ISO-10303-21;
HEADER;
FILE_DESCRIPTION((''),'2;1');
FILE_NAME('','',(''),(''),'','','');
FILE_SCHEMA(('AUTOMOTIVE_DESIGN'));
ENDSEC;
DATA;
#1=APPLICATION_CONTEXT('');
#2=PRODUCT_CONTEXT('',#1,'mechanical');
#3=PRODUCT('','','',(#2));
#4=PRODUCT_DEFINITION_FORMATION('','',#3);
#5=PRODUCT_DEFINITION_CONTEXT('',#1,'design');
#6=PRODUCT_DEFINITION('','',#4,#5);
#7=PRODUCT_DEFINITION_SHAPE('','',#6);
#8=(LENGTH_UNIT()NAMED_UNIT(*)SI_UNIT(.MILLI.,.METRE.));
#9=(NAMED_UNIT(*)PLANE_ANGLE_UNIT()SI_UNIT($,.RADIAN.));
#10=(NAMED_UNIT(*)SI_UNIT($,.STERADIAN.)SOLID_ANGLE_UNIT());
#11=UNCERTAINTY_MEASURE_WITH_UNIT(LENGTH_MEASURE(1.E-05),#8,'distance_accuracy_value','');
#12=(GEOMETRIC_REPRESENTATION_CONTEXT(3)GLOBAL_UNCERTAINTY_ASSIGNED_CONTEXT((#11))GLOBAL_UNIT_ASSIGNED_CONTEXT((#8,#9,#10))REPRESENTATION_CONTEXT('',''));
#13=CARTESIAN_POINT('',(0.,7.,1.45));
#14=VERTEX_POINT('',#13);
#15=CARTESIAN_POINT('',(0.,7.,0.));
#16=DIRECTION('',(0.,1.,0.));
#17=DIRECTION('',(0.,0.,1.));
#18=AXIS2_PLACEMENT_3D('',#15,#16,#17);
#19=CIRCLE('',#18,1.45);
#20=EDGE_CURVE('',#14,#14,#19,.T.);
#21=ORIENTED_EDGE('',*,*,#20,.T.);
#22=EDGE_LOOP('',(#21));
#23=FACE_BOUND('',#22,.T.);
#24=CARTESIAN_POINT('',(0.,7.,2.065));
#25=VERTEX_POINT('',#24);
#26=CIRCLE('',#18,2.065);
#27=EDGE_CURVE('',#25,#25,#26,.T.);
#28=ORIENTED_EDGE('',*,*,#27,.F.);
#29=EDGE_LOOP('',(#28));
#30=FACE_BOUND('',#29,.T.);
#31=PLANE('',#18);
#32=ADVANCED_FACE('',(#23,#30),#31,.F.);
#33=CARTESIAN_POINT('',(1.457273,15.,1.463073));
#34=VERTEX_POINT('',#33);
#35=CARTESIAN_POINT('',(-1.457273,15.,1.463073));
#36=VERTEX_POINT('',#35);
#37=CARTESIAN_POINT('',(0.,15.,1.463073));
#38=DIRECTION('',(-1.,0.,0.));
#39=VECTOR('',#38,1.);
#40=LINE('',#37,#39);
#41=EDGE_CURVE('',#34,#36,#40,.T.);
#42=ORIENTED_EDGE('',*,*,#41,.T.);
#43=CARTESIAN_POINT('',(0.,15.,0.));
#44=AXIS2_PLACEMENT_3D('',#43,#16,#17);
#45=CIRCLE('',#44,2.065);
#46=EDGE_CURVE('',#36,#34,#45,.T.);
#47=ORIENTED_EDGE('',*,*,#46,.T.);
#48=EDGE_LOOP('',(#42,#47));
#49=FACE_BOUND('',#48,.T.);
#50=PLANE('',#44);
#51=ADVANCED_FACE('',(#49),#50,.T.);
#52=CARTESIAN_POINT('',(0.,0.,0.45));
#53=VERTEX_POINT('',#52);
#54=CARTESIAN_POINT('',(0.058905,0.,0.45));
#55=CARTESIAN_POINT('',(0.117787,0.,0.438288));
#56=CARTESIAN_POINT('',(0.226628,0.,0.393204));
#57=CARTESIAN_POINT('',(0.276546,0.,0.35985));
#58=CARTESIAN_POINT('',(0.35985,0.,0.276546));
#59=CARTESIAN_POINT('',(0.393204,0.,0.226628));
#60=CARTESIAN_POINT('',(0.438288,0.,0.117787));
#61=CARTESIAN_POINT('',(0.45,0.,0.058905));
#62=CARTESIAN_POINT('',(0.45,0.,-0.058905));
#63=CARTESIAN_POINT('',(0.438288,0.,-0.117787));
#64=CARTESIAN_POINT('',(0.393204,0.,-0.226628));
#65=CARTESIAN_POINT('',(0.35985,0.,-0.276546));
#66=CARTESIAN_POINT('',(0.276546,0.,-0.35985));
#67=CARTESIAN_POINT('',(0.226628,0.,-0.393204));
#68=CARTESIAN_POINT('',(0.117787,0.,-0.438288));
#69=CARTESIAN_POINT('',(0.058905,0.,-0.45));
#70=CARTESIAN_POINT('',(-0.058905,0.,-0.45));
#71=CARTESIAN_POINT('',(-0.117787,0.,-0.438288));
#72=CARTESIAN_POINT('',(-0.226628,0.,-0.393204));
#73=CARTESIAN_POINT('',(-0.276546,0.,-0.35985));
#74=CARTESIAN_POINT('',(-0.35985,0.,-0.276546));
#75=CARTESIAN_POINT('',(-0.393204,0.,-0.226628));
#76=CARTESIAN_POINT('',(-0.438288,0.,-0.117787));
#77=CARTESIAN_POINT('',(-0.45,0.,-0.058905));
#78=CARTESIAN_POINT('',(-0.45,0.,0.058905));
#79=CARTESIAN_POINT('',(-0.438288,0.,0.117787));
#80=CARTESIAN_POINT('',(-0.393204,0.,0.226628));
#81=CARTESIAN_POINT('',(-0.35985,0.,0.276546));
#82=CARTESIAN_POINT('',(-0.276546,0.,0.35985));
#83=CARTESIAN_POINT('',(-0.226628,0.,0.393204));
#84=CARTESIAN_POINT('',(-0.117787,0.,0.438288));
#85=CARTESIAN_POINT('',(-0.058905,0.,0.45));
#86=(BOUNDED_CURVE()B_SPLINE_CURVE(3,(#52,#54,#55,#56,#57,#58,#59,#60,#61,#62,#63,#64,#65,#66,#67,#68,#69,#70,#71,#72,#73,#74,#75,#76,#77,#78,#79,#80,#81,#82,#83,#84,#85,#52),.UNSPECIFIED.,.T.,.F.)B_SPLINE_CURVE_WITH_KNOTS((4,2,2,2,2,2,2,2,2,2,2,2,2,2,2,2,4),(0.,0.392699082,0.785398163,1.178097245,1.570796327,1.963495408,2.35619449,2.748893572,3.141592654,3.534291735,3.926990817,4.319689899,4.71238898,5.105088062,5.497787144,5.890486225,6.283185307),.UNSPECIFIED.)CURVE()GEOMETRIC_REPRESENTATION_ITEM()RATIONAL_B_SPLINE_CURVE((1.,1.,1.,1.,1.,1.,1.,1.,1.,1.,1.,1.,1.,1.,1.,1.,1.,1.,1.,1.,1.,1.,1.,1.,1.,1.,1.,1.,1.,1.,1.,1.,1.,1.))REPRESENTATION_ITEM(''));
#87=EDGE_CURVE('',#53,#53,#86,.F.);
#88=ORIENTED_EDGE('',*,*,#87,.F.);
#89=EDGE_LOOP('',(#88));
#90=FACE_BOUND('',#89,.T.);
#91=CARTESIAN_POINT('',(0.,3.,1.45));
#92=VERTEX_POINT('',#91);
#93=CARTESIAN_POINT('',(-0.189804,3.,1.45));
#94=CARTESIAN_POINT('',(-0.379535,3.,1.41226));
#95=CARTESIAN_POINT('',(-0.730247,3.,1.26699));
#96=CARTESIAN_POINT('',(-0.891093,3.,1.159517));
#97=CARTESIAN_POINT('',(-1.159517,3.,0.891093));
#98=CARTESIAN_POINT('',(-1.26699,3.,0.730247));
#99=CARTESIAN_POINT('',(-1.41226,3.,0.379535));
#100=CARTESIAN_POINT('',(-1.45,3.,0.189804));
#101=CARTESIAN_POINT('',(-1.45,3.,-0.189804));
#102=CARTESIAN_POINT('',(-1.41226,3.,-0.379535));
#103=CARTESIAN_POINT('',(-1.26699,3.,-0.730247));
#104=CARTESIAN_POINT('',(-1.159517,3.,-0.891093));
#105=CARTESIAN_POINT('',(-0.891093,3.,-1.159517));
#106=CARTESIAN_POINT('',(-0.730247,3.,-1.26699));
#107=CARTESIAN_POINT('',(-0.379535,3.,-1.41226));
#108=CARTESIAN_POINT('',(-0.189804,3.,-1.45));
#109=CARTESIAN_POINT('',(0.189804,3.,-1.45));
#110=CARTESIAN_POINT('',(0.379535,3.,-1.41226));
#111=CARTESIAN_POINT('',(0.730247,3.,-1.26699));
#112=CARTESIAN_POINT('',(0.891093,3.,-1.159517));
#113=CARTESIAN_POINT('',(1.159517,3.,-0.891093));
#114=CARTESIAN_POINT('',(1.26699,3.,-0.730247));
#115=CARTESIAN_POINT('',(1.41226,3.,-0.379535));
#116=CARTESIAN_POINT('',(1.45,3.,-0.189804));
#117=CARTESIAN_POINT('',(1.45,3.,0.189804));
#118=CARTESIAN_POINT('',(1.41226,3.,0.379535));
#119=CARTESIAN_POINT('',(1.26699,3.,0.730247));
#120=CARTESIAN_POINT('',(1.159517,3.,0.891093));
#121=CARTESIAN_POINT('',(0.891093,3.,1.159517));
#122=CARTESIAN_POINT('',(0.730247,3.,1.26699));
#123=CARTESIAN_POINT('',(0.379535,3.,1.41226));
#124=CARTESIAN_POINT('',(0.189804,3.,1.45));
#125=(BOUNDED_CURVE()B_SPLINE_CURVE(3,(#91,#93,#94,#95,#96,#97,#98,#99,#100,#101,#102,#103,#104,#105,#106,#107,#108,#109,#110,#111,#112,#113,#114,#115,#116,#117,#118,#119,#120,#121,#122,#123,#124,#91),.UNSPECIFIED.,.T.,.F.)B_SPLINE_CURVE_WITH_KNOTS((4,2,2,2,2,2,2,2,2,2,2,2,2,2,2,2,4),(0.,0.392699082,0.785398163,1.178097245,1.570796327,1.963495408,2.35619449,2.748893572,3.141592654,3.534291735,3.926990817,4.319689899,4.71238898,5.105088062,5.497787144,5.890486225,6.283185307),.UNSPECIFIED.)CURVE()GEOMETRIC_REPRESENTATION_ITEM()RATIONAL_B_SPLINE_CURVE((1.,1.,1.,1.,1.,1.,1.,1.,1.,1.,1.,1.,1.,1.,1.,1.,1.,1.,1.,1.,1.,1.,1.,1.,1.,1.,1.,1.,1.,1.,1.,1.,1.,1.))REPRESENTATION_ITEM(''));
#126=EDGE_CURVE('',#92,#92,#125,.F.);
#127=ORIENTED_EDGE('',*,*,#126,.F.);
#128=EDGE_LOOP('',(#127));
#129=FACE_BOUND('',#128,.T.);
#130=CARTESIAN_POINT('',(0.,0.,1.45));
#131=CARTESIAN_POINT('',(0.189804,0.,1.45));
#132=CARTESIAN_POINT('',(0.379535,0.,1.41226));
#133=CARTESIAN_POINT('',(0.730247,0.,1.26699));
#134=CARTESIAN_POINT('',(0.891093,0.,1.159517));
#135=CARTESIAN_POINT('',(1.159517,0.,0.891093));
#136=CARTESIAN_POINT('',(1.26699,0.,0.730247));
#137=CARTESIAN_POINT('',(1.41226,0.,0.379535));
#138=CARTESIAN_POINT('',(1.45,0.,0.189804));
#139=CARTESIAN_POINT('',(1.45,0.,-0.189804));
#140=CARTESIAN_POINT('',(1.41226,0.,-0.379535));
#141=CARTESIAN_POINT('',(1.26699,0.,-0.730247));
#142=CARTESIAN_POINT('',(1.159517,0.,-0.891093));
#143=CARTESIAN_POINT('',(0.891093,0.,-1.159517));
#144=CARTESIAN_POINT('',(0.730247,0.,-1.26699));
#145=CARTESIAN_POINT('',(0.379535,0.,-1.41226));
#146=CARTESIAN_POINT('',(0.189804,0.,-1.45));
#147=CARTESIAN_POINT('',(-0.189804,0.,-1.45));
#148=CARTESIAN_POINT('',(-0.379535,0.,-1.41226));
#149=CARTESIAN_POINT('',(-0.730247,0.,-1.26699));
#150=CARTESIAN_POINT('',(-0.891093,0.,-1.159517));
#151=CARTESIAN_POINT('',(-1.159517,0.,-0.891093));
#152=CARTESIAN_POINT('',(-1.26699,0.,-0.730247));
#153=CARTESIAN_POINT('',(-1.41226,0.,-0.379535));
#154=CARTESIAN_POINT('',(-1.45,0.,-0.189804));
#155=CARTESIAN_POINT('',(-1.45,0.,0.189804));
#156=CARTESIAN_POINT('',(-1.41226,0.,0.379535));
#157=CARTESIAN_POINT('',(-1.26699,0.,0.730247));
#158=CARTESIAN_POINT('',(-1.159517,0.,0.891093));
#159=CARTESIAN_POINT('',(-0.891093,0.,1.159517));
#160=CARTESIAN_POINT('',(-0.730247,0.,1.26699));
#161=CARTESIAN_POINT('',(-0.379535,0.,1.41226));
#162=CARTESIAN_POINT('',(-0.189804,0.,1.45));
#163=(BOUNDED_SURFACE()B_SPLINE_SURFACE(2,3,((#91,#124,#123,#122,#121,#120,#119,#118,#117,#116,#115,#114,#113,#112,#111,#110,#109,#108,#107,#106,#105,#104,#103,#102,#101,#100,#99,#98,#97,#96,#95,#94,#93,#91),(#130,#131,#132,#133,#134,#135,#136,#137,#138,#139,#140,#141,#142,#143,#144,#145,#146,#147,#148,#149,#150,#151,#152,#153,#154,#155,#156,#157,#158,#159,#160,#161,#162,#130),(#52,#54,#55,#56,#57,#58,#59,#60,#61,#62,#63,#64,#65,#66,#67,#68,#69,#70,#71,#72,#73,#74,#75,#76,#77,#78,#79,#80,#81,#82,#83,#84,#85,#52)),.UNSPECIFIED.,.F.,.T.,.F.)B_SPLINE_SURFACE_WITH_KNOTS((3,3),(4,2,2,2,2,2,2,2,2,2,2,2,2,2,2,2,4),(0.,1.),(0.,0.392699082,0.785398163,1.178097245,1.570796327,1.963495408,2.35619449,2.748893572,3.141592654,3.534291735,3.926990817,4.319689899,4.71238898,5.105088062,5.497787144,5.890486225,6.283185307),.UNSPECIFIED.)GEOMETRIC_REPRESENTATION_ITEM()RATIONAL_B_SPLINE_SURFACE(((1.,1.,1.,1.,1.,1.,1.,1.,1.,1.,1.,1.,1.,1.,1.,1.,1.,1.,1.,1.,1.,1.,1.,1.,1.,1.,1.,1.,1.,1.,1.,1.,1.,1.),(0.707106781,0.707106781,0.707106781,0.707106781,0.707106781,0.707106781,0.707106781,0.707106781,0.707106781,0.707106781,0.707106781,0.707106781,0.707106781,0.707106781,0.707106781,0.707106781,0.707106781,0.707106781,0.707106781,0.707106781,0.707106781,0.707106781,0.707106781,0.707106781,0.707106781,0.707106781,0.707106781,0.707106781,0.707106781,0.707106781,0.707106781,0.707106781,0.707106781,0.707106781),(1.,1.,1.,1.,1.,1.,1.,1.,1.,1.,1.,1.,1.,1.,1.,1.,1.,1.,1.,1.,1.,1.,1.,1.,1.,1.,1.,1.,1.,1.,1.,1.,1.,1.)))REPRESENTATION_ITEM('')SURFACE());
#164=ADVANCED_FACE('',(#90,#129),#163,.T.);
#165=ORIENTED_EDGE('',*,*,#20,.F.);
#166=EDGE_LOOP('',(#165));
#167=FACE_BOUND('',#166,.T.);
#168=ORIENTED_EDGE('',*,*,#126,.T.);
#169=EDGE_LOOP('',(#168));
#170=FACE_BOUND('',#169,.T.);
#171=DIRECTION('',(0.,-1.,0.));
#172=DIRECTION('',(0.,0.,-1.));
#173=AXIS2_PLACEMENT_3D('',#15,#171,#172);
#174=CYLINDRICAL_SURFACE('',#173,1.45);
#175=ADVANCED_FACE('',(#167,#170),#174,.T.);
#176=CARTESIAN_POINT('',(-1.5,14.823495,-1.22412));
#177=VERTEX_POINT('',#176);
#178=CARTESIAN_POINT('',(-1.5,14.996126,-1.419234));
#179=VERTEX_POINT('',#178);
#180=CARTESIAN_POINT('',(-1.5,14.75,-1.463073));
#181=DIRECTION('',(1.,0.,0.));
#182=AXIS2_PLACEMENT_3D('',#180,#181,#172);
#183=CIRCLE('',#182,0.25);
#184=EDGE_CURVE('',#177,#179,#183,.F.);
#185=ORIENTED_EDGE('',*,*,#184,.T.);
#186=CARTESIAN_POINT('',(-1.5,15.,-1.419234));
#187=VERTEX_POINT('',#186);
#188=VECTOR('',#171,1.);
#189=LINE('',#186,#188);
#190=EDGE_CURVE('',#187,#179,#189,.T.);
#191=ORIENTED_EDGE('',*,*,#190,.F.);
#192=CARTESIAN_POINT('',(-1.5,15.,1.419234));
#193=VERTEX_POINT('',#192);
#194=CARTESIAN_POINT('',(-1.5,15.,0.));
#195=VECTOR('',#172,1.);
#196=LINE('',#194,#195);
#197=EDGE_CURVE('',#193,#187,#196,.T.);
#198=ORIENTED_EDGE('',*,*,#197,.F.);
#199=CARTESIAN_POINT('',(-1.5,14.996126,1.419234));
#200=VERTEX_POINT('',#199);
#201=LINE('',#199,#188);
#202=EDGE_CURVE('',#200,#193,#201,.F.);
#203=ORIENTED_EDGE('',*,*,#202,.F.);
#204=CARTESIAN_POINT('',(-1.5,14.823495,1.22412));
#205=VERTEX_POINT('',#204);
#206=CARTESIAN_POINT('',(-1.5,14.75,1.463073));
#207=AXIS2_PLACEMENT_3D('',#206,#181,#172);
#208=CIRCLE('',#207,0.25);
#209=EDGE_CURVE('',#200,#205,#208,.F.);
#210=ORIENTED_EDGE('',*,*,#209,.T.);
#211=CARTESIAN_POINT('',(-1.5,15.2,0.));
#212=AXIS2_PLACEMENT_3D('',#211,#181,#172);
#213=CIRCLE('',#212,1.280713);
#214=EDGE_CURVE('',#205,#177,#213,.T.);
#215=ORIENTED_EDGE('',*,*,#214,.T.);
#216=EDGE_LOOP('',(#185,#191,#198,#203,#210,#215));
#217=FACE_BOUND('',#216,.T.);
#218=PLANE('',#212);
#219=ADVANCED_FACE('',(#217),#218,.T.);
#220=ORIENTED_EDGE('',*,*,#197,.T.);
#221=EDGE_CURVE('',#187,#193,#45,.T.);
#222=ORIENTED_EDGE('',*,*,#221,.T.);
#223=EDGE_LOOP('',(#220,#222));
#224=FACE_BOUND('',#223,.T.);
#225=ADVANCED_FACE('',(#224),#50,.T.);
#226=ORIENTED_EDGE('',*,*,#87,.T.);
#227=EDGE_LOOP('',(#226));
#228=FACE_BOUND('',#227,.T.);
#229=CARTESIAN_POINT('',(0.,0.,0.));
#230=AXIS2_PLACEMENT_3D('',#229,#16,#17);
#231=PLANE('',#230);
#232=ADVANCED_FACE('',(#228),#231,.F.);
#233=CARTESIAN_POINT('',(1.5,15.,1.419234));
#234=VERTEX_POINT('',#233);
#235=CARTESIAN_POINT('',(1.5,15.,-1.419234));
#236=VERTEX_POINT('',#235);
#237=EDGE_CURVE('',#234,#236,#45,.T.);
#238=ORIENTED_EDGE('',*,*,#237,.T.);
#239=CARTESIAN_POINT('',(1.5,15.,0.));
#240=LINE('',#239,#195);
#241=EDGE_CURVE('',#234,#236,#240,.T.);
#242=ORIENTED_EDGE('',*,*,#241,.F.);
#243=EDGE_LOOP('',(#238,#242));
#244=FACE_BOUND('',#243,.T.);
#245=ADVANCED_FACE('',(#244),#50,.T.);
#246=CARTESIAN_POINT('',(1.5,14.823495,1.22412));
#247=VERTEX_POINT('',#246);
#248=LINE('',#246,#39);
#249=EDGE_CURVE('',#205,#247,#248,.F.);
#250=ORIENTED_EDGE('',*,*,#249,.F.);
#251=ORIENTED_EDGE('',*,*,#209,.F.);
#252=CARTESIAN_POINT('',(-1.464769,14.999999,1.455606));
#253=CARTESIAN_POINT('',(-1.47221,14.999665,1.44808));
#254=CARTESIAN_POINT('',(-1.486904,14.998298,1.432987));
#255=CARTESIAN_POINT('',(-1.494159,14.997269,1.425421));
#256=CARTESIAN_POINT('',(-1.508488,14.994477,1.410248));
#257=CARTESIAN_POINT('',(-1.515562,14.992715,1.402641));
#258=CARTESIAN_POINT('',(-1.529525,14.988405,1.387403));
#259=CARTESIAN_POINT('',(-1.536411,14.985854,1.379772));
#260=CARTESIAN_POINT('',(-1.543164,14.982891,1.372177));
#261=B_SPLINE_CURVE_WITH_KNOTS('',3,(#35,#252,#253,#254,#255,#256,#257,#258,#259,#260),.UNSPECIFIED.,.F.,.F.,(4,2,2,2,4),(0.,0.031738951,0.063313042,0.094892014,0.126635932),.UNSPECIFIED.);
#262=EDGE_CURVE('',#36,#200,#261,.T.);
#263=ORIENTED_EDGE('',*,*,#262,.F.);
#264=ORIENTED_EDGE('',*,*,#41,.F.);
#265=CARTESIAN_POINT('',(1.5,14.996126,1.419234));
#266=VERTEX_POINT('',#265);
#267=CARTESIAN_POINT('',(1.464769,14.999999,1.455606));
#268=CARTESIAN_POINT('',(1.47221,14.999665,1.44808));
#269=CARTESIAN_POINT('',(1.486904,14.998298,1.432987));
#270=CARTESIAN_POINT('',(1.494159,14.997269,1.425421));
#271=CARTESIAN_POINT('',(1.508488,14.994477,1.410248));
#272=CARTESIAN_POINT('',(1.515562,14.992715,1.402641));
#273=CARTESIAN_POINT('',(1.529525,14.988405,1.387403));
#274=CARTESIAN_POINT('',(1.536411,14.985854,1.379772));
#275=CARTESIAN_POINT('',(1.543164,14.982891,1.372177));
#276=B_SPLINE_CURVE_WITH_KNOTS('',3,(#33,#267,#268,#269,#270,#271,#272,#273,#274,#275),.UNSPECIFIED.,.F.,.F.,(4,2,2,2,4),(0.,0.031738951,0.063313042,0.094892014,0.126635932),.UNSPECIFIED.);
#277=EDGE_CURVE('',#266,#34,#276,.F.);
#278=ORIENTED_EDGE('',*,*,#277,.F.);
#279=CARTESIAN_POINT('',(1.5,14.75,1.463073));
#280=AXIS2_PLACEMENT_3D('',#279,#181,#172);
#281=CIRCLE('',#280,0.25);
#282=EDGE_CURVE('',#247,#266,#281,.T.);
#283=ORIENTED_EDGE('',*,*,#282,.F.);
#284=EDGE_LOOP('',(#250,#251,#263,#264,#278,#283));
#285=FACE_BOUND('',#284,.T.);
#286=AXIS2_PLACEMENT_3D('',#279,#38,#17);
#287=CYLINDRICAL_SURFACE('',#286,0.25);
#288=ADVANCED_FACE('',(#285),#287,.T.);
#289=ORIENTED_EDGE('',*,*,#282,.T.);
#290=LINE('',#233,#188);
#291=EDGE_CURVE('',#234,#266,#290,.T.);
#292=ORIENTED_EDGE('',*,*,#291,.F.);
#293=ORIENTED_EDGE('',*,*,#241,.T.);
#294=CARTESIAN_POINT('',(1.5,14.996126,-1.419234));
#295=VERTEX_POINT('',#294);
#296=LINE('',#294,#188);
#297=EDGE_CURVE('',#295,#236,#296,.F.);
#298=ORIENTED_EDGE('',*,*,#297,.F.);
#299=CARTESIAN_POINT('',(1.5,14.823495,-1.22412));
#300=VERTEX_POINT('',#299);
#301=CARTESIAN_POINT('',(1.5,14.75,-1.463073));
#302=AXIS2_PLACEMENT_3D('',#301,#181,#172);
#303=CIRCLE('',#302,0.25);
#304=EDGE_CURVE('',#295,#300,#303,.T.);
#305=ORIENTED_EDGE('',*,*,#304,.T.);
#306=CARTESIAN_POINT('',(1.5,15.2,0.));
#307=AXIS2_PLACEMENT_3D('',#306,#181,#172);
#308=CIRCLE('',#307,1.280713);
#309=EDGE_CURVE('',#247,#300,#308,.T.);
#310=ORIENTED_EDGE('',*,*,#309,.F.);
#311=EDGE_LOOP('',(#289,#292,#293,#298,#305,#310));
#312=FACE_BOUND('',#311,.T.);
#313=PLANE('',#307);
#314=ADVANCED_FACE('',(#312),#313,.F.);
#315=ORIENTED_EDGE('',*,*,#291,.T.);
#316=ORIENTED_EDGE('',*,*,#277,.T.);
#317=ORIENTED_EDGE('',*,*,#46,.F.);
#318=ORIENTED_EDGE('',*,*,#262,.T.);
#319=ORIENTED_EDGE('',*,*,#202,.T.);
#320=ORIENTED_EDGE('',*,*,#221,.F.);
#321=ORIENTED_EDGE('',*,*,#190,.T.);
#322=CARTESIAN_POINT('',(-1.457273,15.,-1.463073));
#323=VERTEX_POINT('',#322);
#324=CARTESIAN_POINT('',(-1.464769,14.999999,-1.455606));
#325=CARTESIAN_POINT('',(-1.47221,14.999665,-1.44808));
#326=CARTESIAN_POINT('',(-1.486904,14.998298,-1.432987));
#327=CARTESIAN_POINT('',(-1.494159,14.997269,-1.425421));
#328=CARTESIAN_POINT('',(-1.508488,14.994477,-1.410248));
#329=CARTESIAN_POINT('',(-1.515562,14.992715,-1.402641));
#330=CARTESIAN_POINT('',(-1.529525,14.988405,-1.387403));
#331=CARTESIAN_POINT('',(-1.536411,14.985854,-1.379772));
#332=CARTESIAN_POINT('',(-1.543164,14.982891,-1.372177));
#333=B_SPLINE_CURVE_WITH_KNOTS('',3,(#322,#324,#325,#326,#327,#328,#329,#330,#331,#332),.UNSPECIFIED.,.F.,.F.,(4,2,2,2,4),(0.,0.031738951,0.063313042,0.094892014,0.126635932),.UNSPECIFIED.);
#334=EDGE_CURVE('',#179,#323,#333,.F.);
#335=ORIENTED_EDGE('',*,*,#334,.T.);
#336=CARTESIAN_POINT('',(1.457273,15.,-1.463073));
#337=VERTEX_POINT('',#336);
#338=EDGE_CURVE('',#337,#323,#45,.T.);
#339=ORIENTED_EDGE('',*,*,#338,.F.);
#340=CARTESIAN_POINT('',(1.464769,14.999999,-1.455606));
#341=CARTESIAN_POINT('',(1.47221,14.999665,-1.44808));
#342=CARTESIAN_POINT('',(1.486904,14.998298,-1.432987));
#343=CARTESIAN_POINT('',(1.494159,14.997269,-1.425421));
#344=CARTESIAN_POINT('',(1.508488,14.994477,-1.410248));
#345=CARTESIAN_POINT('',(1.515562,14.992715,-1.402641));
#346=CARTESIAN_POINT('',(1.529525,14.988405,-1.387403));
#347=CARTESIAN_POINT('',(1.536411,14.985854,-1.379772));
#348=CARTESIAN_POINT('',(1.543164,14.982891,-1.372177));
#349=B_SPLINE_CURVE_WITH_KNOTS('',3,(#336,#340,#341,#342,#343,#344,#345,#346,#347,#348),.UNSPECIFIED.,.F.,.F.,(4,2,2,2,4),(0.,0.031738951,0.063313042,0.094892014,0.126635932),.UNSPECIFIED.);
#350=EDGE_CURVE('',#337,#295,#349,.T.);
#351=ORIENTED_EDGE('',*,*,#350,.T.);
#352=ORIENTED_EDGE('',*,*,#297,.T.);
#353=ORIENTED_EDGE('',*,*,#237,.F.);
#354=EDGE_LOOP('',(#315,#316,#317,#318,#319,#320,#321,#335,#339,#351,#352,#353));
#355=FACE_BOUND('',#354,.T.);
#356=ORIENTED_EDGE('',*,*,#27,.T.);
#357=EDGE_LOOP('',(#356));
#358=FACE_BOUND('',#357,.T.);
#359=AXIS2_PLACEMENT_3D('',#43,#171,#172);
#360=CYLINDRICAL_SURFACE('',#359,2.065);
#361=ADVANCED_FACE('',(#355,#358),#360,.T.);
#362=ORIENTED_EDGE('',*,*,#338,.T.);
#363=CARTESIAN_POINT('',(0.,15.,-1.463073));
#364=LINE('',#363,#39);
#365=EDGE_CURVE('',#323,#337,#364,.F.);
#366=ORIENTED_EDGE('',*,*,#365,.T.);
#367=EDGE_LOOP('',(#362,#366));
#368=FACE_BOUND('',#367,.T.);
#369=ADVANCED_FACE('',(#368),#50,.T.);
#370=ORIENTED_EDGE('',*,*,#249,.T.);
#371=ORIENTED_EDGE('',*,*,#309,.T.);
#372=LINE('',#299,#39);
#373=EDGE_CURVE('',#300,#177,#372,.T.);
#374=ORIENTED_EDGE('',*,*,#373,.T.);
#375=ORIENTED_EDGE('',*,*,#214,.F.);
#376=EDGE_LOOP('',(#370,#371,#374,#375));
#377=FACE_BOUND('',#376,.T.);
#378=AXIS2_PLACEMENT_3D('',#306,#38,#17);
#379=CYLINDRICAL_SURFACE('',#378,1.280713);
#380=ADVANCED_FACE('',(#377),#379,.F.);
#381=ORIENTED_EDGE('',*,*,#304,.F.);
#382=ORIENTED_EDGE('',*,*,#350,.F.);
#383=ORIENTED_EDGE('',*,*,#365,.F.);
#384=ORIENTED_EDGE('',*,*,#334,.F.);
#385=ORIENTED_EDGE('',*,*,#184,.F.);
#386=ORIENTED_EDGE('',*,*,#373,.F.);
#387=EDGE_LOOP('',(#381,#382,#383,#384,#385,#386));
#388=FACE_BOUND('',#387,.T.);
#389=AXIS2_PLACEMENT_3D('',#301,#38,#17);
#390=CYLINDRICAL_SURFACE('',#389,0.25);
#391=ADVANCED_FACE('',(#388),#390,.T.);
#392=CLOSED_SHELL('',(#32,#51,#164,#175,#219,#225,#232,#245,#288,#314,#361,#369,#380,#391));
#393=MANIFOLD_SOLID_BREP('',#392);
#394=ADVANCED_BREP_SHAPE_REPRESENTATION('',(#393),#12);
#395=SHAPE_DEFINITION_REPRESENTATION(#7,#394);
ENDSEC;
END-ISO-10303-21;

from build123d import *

# Parameters (mm, degrees)
SKETCH1_R               = 1.45
BOSS_EXTRUDE1_DEPTH     = 7
SKETCH3_R               = 2.065
BOSS_EXTRUDE3_DEPTH     = 8
FILLET1_SIZE            = 3
FILLET1_SIZE_2          = 1
CUT_EXTRUDE1_DEPTH      = 1.5
CUT_EXTRUDE1_DEPTH_BACK = 1.5
SKETCH5_R               = 1.280712692
FILLET2_R               = 0.25


with BuildPart() as part:
    # Sketch1 → Boss-Extrude1 (new body)
    with BuildSketch(Plane(origin=(0, 0, 0), x_dir=(1, 0, 0), z_dir=(0, 1, 0))):
        with Locations(Location((0, 0, 0), (0, 0, 270))):
            Circle(SKETCH1_R)
    extrude(amount=BOSS_EXTRUDE1_DEPTH)

    # Sketch3 → Boss-Extrude3 (add)
    with BuildSketch(Plane(origin=(0, 7, 0), x_dir=(1, 0, 0), z_dir=(0, 1, 0))):
        with Locations(Location((0, 0, 0), (0, 0, 270))):
            Circle(SKETCH3_R)
    extrude(amount=BOSS_EXTRUDE3_DEPTH)

    # Fillet1
    # an asymmetric fillet: 3, 1 mm, written as the material it takes off along each edge
    with BuildSketch(Plane(origin=(0, 0, 0), x_dir=(0, 0, 1), z_dir=(-1, 0, 0))) as fillet1_piece_1:
        with BuildLine():
            Bezier((1.45, FILLET1_SIZE), (1.45, 0), (1.45 - FILLET1_SIZE_2, 0), weights=[1, 0.707106781, 1])
            Line((1.45 - FILLET1_SIZE_2, 0), (1.45, 0))
            Line((1.45, 0), (1.45, FILLET1_SIZE))
        make_face()
    revolve(axis=Axis((0, 0, 0), (0, 1, 0)), mode=Mode.SUBTRACT)

    # Sketch5 → Cut-Extrude1 (cut, two sides: drawn at the far end of the back side and taken through both)
    with BuildSketch(Plane(origin=(0, 0, 0), x_dir=(0, 0, -1), z_dir=(1, 0, 0)).offset(-CUT_EXTRUDE1_DEPTH_BACK)):
        with Locations((0, 15.2)):
            Circle(SKETCH5_R)
    extrude(amount=CUT_EXTRUDE1_DEPTH + CUT_EXTRUDE1_DEPTH_BACK, mode=Mode.SUBTRACT)

    # Fillet2
    # the kernel refuses this fillet: 0.25 mm, written as the material it takes off along each edge
    with BuildSketch(Plane(origin=(1.5, 15, 1.265), x_dir=(0, 0, 1), z_dir=(-1, 0, 0)), Plane(origin=(-1.5, 15, -1.265), x_dir=(0, 0, -1), z_dir=(1, 0, 0))) as fillet2_piece_1:
        with BuildLine():
            CenterArc((0.19807257, -0.25), FILLET2_R, 90, 72.903573808)
            Line((-0.040880268, -0.176504823), (-0.045659325, -0.17503492))
            ThreePointArc((-0.045659325, -0.17503492), (-0.022186102, -0.087848028), (-0.004938656, 0.000780815))
            Line((-0.004938656, 0.000780815), (0, 0.005))
            Line((0, 0.005), (0.19807257, 0.005))
            Line((0.19807257, 0.005), (0.19807257, 0))
        make_face()
    extrude(amount=3, mode=Mode.SUBTRACT)


solid = part.part
